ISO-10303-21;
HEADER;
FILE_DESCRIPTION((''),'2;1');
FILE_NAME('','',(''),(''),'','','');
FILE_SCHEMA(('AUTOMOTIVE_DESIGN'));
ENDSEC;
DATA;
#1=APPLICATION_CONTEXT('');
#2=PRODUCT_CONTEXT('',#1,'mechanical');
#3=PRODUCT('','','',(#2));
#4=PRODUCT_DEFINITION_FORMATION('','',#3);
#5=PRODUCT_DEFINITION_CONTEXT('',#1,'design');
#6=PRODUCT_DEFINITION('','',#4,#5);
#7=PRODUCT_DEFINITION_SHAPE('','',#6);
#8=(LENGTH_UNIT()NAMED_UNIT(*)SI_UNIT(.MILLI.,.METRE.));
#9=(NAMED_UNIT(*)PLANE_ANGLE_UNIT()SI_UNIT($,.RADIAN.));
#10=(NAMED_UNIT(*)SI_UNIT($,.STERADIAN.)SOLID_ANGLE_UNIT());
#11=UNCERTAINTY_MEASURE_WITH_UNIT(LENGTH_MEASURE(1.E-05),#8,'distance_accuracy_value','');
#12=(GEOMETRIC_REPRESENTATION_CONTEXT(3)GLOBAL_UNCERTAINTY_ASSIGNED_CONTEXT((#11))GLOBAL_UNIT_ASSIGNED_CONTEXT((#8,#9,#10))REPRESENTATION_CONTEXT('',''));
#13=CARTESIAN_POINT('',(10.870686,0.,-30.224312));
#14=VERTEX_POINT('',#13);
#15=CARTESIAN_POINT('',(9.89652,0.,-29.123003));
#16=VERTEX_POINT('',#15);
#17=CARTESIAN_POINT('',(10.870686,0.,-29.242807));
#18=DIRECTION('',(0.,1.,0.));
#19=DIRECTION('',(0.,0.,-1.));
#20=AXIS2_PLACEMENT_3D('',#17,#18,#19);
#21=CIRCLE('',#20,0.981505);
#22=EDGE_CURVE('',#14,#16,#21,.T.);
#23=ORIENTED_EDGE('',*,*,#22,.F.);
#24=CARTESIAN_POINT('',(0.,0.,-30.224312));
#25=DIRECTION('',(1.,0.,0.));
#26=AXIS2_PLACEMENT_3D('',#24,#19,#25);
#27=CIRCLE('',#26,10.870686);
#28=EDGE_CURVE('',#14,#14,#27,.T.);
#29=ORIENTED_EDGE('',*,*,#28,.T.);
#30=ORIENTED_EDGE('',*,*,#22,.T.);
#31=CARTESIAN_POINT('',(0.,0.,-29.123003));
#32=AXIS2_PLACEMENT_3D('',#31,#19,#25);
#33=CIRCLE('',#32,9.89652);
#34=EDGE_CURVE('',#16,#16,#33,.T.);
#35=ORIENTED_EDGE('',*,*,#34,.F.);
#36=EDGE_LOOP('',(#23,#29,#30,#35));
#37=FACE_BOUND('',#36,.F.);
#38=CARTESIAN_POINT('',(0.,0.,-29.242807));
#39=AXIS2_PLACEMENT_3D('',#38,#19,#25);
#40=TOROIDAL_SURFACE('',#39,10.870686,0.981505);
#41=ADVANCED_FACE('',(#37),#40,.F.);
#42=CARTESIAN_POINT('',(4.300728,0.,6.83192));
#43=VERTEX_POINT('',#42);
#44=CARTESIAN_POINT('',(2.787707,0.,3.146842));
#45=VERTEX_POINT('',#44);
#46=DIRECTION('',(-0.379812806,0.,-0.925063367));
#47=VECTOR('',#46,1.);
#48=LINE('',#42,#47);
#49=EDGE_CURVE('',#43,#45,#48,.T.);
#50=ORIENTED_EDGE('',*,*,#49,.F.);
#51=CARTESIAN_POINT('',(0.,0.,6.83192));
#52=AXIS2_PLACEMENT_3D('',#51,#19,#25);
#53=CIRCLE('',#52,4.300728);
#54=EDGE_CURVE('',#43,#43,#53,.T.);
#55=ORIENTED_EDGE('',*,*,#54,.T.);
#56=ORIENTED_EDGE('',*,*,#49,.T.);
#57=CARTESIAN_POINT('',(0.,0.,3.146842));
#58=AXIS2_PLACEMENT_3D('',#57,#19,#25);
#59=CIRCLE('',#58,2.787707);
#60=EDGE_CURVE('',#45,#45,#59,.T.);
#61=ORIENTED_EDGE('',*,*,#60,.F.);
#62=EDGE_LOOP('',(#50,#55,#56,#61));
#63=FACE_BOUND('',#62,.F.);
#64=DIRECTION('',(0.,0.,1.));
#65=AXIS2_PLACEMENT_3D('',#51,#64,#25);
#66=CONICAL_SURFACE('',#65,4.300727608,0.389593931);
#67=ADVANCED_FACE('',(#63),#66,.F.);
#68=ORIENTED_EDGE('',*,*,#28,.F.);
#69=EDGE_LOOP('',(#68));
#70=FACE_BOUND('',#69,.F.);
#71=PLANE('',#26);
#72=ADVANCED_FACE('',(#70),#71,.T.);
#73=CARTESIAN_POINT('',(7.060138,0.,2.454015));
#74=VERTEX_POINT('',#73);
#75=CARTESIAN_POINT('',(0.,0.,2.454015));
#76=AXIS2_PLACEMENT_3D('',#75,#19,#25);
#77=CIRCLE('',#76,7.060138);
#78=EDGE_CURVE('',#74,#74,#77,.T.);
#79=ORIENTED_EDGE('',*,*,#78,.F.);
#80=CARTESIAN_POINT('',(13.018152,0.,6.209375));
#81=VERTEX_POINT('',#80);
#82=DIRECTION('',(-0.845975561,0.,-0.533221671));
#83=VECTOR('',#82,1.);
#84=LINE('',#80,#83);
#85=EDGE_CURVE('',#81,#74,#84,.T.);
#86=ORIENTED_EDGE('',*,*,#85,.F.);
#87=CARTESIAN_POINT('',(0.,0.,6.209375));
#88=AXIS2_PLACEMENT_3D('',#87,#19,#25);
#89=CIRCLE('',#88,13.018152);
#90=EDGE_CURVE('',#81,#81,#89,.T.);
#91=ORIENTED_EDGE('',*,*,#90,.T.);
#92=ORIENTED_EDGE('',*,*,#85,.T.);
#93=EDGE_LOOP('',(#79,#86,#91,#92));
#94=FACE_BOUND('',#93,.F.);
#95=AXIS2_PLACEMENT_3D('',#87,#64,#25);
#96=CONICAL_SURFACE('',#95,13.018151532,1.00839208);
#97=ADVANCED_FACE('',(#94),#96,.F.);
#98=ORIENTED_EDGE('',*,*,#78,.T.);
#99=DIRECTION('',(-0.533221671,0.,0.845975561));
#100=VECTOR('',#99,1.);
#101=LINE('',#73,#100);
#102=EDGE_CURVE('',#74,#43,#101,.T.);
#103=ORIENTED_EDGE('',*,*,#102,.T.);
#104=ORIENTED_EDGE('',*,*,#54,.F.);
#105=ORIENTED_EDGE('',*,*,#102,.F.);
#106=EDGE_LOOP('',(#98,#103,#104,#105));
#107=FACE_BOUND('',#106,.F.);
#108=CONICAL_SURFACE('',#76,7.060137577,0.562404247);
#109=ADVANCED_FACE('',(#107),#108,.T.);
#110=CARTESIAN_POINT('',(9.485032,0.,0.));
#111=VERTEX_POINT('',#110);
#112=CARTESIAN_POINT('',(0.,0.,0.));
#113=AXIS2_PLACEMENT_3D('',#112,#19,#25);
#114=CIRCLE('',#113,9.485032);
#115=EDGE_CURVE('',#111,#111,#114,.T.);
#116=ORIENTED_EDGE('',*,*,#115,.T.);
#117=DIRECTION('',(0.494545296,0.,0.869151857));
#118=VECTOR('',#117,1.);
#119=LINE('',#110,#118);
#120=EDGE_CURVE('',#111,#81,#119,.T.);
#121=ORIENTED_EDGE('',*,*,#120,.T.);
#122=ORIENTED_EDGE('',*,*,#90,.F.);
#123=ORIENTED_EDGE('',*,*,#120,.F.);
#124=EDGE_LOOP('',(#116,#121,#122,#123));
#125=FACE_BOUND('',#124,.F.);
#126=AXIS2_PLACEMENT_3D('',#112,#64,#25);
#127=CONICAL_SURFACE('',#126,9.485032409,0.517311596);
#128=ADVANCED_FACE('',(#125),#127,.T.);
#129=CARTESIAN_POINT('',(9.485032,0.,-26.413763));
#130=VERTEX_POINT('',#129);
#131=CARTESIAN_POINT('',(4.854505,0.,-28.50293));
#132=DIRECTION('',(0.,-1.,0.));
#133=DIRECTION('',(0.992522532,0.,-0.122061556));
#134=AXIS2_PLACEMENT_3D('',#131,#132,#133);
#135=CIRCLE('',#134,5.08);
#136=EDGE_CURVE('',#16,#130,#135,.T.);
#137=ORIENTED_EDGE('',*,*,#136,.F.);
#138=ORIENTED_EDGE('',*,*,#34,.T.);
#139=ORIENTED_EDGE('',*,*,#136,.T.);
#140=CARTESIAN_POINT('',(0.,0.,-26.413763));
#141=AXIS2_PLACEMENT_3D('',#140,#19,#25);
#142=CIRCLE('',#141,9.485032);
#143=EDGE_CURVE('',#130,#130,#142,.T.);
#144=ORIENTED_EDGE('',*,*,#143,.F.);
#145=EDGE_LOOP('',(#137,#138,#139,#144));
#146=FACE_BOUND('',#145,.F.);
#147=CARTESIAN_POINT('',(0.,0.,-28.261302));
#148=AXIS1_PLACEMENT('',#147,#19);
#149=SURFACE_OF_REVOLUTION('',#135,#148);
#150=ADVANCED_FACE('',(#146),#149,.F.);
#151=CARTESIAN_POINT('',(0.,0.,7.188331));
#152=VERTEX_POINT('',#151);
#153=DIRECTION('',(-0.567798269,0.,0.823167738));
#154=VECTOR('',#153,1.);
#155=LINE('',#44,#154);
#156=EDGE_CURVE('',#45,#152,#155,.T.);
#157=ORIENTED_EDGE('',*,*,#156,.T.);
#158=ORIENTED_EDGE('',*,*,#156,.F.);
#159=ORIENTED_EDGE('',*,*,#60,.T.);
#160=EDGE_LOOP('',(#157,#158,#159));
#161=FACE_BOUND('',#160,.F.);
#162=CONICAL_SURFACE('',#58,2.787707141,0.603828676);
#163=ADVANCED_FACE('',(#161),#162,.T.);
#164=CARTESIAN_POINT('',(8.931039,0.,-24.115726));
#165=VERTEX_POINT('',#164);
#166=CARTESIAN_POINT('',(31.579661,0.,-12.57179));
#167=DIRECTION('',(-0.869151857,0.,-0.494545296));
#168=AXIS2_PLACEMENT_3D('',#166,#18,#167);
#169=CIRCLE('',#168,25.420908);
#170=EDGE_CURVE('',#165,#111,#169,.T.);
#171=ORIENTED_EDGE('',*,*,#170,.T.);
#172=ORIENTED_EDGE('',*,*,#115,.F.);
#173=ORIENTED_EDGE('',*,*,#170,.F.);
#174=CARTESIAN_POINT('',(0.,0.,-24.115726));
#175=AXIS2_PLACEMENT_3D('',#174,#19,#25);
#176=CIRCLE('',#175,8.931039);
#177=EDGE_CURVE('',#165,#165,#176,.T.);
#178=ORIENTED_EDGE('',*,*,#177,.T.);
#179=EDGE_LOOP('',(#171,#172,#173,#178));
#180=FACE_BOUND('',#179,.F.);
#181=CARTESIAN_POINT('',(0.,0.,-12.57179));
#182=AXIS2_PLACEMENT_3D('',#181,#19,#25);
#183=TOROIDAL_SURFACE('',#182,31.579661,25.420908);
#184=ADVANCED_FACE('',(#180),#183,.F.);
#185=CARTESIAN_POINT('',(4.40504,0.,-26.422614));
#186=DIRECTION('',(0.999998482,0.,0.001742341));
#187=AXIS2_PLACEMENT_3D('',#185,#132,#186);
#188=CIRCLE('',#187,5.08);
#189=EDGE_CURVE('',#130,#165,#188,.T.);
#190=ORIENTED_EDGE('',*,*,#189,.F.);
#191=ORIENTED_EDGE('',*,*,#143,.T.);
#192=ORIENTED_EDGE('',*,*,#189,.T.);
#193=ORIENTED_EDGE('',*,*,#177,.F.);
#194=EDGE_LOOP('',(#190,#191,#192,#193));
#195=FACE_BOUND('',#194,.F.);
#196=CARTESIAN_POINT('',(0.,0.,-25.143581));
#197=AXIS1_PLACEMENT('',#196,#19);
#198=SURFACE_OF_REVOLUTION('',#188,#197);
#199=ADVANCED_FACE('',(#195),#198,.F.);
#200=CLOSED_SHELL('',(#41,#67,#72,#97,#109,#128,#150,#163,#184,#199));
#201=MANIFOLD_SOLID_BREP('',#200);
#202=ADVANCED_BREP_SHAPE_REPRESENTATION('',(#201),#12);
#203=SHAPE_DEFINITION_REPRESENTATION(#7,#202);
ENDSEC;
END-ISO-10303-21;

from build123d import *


# Not quite as in the source:
# - a fillet or chamfer that OpenCascade refuses, or shapes differently, is made with other operations: its cross-section is extruded or revolved along the edge and cut away or added


with BuildPart() as f1:
    # F0 (on Front) → F1 (revolve)
    with BuildSketch(Plane.XZ):
        with BuildLine():
            Line((0, 7.1883308701), (0, -30.2243120968))
            Line((0, -30.2243120968), (10.8706858009, -30.2243120968))
            ThreePointArc((10.8706858009, -30.2243120968), (9.889180772, -29.2428070679), (10.8706858009, -28.261302039))
            Line((10.8706858009, -28.261302039), (9.4850324094, -26.413762942))
            Line((9.4850324094, -26.413762942), (9.4850324094, -25.1435805112))
            ThreePointArc((9.4850324094, -25.1435805112), (6.1587538552, -12.5717902556), (9.4850324094, 0))
            Line((9.4850324094, 0), (13.0181515325, 6.2093746912))
            Line((13.0181515325, 6.2093746912), (7.0601375774, 2.4540154263))
            Line((7.0601375774, 2.4540154263), (4.3007276076, 6.8319196288))
            Line((4.3007276076, 6.8319196288), (2.7877071407, 3.1468416564))
            Line((2.7877071407, 3.1468416564), (0, 7.1883308701))
        make_face()
    revolve(axis=Axis((0, 0, -11.5179906134), (0, 0, -1)))

    # F2: fillet of radius 5.08 on 3 edges, made by hand

    # F2_s1 → F2_t2 (revolve, cut)
    with BuildSketch(Plane.XZ):
        with BuildLine():
            ThreePointArc((9.8965199445, -29.1230030365), (9.8769062732, -27.7401129903), (9.4850324094, -26.413762942))
            Line((9.4850324094, -26.413762942), (9.577642948, -26.3719795942))
            ThreePointArc((9.577642948, -26.3719795942), (10.2591391248, -27.2765725167), (10.9519658206, -28.2003420652))
            Line((10.9519658206, -28.2003420652), (10.8706858009, -28.362902039))
            ThreePointArc((10.8706858009, -28.362902039), (10.2877069025, -28.5837407102), (9.9973602337, -29.1354044906))
            Line((9.9973602337, -29.1354044906), (9.8965199445, -29.1230030365))
        make_face()
    revolve(axis=Axis((0, 0, -28.261302039), (0, 0, -1)), mode=Mode.SUBTRACT)

    # F2_s3 → F2_t4 (revolve, cut)
    with BuildSketch(Plane.XZ):
        with BuildLine():
            ThreePointArc((9.4850324094, -26.413762942), (9.3435632486, -25.2320724327), (8.9310390894, -24.1157258013))
            Line((8.9310390894, -24.1157258013), (9.0215590688, -24.0695880366))
            ThreePointArc((9.0215590688, -24.0695880366), (9.2915699789, -24.584629862), (9.5733382381, -25.0933347091))
            Line((9.5733382381, -25.0933347091), (9.5866324094, -25.1435805112))
            Line((9.5866324094, -25.1435805112), (9.5866322552, -26.4135859201))
            Line((9.5866322552, -26.4135859201), (9.4850324094, -26.413762942))
        make_face()
    revolve(axis=Axis((0, 0, -25.1435805112), (0, 0, -1)), mode=Mode.SUBTRACT)


solid = f1.part
